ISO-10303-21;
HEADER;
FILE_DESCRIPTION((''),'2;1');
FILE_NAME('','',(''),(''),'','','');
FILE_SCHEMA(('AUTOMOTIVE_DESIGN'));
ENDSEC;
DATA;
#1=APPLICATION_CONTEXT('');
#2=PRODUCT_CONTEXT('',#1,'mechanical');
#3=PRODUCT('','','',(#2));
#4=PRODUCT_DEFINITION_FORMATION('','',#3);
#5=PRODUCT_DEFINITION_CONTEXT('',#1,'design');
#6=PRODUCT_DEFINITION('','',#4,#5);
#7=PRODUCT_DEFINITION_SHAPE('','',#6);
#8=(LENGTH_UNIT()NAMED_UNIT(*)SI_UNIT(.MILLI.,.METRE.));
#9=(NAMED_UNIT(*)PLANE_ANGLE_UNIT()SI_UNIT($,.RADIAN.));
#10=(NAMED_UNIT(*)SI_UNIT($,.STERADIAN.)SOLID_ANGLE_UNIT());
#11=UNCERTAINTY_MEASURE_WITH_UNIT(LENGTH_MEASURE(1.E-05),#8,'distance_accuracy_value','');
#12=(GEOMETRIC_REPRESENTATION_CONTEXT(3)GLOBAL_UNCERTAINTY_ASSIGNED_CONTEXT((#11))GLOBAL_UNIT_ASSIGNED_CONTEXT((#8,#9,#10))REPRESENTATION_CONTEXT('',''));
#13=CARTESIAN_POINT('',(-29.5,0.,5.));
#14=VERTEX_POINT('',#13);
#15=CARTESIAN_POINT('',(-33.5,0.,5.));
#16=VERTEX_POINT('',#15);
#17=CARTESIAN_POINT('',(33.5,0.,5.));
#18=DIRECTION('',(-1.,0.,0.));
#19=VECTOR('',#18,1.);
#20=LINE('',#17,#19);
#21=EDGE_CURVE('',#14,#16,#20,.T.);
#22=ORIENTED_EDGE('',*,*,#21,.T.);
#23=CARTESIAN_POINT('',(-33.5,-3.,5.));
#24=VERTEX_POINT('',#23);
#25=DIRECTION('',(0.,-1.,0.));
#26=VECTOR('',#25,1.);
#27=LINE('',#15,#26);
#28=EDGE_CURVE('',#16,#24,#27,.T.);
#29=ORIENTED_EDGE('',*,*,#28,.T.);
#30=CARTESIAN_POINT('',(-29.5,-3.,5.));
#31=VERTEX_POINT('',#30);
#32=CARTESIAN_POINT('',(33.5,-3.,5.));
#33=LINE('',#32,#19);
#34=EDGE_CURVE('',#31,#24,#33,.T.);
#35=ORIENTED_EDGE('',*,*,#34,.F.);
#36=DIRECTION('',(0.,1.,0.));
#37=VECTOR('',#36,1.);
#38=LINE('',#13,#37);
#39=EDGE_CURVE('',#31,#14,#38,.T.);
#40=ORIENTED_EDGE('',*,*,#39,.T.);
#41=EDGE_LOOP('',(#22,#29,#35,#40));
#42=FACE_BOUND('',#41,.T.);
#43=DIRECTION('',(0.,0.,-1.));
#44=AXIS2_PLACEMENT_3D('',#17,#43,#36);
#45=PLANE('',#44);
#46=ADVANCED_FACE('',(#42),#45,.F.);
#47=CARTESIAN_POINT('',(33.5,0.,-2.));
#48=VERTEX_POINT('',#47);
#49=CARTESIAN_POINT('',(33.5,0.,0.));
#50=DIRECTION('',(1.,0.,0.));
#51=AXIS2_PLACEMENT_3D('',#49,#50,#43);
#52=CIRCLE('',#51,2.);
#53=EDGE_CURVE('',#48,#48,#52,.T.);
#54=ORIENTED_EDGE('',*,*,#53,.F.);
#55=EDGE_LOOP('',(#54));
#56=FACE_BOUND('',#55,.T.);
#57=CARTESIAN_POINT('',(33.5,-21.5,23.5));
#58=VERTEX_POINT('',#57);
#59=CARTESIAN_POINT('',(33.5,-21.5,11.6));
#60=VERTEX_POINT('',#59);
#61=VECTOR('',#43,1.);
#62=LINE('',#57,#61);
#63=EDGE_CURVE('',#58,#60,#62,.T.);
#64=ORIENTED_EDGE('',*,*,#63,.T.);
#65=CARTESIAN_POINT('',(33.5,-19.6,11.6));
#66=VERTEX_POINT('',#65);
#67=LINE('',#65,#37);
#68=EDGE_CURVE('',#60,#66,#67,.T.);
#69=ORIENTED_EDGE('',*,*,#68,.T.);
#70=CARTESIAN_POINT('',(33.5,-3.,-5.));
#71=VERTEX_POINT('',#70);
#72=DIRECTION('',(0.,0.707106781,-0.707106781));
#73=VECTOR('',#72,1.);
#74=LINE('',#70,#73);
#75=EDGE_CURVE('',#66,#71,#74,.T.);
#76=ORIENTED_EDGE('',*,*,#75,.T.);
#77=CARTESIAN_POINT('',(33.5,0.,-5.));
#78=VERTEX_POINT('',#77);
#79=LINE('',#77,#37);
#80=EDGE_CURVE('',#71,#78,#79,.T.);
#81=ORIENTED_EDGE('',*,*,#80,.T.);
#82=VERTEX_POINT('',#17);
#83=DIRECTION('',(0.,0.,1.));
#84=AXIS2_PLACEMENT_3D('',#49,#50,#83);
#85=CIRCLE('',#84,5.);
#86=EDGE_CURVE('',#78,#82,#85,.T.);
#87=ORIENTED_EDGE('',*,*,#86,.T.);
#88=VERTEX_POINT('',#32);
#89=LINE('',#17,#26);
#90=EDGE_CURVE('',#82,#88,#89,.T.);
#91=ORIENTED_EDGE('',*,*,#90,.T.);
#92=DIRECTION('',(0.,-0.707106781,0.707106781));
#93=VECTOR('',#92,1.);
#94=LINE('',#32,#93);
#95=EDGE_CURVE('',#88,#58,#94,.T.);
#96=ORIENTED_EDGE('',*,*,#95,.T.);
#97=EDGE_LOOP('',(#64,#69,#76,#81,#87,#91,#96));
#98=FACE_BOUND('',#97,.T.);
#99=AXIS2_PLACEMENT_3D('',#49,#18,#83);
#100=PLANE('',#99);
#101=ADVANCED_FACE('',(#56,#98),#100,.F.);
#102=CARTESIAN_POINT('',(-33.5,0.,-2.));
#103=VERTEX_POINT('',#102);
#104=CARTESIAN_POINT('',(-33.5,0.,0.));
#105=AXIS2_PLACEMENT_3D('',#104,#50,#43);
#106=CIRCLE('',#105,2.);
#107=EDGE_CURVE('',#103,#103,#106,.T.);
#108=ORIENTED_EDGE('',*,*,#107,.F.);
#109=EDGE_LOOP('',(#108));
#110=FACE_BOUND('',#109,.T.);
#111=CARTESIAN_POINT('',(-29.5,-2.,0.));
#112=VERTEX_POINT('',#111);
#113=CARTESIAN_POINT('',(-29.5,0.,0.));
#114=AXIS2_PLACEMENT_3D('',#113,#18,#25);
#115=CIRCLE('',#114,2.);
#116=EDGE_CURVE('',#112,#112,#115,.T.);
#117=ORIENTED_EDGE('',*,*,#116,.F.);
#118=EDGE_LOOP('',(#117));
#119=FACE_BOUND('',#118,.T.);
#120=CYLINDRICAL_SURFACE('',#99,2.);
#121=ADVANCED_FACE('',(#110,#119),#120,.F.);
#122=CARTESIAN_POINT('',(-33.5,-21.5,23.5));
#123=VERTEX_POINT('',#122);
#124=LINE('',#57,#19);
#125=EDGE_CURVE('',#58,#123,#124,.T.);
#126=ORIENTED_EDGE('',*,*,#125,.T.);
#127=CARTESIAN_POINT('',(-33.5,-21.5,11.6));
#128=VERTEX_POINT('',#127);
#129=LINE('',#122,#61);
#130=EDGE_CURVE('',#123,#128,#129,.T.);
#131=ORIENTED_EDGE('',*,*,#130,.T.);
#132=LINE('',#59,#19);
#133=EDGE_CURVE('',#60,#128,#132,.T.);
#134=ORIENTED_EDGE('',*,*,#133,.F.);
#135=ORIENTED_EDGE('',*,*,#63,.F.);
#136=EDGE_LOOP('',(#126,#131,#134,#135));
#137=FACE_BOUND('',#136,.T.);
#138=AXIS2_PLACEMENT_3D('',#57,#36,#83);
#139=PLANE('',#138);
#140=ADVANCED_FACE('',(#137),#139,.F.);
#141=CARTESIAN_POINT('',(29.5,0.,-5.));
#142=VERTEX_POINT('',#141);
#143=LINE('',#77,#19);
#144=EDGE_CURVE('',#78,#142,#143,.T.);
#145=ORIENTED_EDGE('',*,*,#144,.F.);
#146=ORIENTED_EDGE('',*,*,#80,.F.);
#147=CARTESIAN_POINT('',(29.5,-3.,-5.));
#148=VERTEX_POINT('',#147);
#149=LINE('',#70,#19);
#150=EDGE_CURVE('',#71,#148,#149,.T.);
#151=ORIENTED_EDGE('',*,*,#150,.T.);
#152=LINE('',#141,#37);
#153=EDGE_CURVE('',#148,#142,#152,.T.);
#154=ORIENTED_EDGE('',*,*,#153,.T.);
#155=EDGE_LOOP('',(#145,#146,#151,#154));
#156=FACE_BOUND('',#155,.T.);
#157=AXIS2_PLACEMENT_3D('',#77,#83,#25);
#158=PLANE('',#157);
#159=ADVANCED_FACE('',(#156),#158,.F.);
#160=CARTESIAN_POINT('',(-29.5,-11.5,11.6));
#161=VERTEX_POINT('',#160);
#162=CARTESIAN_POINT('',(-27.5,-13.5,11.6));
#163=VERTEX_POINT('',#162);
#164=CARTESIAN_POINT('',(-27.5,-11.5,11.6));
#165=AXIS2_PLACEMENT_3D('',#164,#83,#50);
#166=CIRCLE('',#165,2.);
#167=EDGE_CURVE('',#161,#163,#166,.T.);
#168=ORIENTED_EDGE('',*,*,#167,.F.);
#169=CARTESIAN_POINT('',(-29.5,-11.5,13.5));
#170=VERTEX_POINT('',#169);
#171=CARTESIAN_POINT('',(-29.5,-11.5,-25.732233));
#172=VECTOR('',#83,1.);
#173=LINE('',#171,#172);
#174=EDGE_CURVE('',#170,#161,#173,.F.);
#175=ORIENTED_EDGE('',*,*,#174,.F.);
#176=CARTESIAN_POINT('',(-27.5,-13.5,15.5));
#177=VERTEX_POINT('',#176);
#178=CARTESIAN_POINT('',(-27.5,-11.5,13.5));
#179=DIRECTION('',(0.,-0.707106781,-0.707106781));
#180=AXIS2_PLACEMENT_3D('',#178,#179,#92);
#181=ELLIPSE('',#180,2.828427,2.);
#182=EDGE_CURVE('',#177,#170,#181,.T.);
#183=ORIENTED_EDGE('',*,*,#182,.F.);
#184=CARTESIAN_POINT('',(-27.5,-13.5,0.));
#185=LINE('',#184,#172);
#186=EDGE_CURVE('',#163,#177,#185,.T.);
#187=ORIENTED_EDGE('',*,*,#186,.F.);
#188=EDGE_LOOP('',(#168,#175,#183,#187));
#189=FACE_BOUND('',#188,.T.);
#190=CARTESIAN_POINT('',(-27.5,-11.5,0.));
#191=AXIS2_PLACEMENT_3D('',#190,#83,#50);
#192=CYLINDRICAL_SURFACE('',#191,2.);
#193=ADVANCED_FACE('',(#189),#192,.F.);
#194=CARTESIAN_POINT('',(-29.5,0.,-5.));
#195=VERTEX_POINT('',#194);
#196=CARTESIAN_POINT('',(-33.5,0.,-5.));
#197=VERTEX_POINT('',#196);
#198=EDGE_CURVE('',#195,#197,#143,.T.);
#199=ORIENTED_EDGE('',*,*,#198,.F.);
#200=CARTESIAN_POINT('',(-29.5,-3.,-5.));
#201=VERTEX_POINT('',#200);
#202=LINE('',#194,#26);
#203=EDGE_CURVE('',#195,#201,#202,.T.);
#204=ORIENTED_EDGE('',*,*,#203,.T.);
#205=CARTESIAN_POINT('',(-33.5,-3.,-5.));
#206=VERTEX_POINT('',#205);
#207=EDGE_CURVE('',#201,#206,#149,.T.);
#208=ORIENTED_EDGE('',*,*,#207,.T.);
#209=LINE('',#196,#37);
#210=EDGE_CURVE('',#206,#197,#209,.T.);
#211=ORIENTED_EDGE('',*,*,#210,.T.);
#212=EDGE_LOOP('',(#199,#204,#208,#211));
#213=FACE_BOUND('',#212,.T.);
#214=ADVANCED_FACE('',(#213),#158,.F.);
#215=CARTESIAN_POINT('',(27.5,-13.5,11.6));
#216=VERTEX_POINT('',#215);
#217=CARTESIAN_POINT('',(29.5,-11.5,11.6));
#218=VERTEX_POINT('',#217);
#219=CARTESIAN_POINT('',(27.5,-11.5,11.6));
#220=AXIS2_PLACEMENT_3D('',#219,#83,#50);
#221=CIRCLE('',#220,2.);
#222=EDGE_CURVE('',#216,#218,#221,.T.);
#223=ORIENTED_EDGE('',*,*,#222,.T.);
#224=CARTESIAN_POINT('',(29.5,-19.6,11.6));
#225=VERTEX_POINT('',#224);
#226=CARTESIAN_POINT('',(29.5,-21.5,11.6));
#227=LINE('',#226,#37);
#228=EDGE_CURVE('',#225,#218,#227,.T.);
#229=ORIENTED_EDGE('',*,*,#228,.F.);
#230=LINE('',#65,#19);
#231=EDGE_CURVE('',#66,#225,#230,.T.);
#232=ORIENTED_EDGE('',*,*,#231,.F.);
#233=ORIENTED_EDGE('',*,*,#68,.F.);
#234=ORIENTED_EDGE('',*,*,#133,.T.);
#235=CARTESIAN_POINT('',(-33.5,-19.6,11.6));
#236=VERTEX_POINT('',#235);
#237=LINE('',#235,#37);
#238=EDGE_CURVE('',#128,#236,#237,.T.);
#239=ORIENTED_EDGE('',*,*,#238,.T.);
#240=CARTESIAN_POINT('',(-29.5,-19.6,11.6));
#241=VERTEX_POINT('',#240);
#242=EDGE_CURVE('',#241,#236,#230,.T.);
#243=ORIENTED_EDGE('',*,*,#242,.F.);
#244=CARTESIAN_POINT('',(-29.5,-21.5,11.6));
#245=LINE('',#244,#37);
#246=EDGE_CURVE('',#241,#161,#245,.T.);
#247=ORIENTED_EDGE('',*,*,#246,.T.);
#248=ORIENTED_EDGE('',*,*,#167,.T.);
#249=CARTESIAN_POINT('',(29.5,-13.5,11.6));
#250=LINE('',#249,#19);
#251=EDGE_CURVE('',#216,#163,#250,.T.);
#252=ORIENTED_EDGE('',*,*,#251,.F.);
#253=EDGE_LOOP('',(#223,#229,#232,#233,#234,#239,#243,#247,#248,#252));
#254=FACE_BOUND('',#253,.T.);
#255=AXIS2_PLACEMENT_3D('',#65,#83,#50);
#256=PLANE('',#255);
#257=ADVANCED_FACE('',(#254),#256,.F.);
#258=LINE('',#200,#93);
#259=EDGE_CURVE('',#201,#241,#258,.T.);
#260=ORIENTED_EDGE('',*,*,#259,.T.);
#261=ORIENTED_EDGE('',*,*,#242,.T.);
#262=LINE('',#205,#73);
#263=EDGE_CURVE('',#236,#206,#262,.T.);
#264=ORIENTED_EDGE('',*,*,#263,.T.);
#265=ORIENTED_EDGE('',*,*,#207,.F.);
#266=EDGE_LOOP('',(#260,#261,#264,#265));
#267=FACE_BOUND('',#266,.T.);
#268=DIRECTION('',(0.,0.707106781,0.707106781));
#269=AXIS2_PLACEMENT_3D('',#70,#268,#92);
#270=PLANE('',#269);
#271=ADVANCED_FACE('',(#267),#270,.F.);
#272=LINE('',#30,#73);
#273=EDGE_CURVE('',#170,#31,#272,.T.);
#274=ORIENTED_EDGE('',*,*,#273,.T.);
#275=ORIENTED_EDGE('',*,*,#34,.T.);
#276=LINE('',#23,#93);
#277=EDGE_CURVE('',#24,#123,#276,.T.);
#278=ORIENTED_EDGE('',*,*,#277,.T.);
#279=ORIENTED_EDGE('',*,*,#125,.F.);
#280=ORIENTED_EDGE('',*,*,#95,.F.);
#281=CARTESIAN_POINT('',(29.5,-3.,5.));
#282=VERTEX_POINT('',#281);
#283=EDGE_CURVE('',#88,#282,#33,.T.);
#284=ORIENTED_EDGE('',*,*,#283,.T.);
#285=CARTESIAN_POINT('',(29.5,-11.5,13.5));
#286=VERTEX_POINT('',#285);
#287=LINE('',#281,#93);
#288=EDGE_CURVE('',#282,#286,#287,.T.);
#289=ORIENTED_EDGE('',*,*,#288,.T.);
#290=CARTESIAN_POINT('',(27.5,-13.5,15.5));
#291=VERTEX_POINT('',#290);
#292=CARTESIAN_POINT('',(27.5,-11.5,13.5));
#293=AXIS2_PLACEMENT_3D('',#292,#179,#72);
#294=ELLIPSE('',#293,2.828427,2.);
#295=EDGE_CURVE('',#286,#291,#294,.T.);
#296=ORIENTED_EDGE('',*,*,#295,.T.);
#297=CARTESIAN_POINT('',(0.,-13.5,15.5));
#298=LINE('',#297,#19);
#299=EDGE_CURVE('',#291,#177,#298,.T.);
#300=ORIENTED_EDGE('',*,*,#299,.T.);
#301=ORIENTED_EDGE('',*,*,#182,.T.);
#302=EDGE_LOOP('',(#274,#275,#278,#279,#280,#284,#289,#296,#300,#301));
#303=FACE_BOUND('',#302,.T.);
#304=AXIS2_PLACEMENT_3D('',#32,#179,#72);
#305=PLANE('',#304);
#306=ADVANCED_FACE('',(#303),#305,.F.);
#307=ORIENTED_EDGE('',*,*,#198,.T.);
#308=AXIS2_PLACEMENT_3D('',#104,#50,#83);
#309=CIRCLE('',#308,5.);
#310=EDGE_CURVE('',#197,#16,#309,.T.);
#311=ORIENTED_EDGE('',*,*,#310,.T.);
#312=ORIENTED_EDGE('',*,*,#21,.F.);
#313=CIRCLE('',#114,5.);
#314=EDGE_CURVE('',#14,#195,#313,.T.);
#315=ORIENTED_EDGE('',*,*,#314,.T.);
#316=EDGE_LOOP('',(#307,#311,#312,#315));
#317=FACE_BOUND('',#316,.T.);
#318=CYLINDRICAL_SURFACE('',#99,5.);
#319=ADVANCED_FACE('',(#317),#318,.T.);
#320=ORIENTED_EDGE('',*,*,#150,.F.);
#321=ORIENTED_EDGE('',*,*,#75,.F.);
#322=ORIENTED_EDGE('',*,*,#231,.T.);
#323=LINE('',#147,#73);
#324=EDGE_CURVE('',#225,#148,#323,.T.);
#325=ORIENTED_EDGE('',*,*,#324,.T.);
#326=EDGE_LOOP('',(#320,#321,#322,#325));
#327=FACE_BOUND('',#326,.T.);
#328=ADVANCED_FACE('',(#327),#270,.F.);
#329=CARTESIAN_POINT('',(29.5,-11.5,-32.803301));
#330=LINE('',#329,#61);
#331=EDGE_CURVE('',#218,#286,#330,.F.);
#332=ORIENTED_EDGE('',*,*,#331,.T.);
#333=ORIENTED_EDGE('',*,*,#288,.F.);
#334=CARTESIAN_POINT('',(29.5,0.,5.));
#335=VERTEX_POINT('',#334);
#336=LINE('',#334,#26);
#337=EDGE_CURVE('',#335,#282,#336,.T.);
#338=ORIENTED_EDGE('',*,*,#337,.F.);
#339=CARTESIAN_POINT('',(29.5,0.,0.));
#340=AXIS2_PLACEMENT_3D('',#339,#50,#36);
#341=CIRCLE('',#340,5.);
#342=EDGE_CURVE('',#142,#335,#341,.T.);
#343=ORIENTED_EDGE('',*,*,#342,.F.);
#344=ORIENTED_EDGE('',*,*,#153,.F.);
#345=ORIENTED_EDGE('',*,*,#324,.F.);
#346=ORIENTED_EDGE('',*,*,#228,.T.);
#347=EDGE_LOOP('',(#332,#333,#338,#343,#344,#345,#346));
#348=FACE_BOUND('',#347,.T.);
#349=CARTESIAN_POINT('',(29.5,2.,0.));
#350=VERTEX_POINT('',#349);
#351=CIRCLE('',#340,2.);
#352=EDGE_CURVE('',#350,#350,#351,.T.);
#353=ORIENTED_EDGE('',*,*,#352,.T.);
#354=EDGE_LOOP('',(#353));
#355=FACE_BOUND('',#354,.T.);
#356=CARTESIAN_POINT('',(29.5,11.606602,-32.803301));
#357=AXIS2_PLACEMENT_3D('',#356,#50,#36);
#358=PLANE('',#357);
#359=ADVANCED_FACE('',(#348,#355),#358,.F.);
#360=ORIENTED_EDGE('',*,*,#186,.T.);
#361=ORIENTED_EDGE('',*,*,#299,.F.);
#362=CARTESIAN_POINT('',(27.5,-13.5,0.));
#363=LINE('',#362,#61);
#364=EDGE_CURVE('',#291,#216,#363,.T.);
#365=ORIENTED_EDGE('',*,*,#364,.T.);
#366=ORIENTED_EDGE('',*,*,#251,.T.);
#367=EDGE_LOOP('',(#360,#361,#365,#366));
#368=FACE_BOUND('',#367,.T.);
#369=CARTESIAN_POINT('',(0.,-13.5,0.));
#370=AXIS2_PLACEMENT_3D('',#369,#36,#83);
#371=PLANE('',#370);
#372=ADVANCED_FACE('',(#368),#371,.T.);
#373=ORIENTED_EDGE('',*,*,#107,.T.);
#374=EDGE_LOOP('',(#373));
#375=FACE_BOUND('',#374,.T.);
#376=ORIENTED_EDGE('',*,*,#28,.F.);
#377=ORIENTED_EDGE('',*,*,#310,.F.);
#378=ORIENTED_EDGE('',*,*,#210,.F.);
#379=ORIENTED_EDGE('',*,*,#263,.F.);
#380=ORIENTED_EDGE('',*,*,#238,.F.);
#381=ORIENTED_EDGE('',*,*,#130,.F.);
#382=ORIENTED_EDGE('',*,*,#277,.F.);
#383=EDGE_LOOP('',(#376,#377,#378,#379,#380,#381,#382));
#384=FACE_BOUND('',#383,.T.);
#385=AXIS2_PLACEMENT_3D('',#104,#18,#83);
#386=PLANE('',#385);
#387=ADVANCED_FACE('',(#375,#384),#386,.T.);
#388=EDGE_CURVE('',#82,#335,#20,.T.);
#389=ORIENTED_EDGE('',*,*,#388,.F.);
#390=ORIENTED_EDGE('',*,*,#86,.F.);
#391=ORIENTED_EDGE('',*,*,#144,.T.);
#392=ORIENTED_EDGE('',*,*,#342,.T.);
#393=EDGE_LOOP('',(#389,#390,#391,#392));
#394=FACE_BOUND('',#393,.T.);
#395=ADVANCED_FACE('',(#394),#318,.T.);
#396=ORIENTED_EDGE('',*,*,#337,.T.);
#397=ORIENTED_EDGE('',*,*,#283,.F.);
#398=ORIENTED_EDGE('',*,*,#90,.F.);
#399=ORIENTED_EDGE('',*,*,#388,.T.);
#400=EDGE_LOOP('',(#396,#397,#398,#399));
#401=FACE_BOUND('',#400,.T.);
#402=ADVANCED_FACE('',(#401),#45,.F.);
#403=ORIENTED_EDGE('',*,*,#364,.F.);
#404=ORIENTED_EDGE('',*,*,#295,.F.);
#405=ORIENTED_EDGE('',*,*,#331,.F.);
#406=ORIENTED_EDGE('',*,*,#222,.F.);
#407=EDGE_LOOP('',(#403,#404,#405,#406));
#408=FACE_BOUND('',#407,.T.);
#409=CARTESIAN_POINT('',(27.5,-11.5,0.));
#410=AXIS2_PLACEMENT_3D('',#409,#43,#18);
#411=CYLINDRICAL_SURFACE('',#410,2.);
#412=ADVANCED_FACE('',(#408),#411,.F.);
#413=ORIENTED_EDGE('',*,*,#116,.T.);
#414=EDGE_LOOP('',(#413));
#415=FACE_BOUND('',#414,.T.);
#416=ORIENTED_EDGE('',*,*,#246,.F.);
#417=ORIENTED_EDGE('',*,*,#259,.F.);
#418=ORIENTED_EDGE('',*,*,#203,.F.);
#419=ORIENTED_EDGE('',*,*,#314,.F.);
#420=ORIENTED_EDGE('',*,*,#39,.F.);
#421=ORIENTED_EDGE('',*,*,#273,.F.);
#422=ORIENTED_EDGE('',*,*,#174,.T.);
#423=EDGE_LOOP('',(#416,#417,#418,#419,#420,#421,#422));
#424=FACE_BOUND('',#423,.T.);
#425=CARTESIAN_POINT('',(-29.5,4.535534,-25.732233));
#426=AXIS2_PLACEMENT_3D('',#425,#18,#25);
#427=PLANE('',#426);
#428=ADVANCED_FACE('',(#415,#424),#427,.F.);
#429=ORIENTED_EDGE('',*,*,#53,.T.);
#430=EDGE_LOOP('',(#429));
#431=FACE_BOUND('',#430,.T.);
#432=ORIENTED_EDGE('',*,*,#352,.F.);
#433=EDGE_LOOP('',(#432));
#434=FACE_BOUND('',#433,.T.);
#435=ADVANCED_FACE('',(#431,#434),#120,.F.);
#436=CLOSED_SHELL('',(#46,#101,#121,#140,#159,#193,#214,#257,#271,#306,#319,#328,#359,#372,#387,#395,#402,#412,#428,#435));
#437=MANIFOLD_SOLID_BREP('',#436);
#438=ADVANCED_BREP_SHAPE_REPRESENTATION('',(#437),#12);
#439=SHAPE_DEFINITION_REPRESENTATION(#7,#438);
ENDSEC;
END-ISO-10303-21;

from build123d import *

# Parameters (mm, degrees)
ESBO_O1_R                  = 2
RESSALTO_EXTRUS_O1_DEPTH   = 33.5
CORTE_EXTRUS_O3_START      = -5
CORTE_EXTRUS_O3_DEPTH      = 23.196699141
CORTE_EXTRUS_O4_DEPTH      = 47.084705336
CORTE_EXTRUS_O4_DEPTH_BACK = 47.084705336
ESBO_O4_W                  = 59
ESBO_O4_H                  = 6.231727984
CORTE_EXTRUS_O5_DEPTH      = 44.128413036
RESSALTO_EXTRUS_O3_START   = -29.398953743
RESSALTO_EXTRUS_O3_DEPTH   = 58.797908802
ESBO_O6_W                  = 59
ESBO_O6_H                  = 4.4
RESSALTO_EXTRUS_O4_DEPTH   = 0.5
CORTE_EXTRUS_O6_DEPTH      = 71.593909086
FILETE1_R                  = 2


# Read off the part's stored shape, not the designer's step: Corte-extrusão3, Ressalto-extrusão3
with BuildPart() as part:
    # Esboço1 → Ressalto-extrusão1 (new, symmetric)
    with BuildSketch(Plane(origin=(0, 0, 0), x_dir=(0, 0, -1), z_dir=(1, 0, 0))):
        with BuildLine():
            Line((-5, 0), (-5, -3))
            Line((-5, -3), (-23.5, -21.5))
            Line((-23.5, -21.5), (-11.6, -21.5))
            Line((-11.6, -21.5), (-11.6, -19.6))
            Line((-11.6, -19.6), (5, -3))
            Line((5, -3), (5, 0))
            ThreePointArc((5, 0), (0, 5), (-5, 0))
        make_face()
        Circle(ESBO_O1_R, mode=Mode.SUBTRACT)
    extrude(amount=RESSALTO_EXTRUS_O1_DEPTH, both=True)

    # Corte-extrusão3 outline → Corte-extrusão3 (cut)
    with BuildSketch(Plane.XY.offset(CORTE_EXTRUS_O3_START)):
        with BuildLine():
            Line((-25.5, -16.196699141), (25.5, -16.196699141))
            add(Edge.make_bspline(
                [(25.5, -16.196699141), (29.5, -16.196699141), (29.5, -13.368272016)],
                knots=[3.141592654, 3.141592654, 3.141592654, 4.71238898, 4.71238898, 4.71238898], degree=2, weights=[1, 0.707106781, 1]))
            Line((29.5, -13.368272016), (29.5, 6))
            Line((29.5, 6), (-29.5, 6))
            Line((-29.5, 6), (-29.5, -13.368272016))
            add(Edge.make_bspline(
                [(-29.5, -13.368272016), (-29.5, -16.196699141), (-25.5, -16.196699141)],
                knots=[4.71238898, 4.71238898, 4.71238898, 6.283185307, 6.283185307, 6.283185307], degree=2, weights=[1, 0.707106781, 1]))
        make_face()
    extrude(amount=CORTE_EXTRUS_O3_DEPTH, mode=Mode.SUBTRACT)

    # Esboço4 → Corte-extrusão4 (cut, two sides: drawn at the far end of the back side and taken through both)
    with BuildSketch(Plane(origin=(0, -16.196699141, 0), x_dir=(1, 0, 0), z_dir=(0, 1, 0)).offset(-CORTE_EXTRUS_O4_DEPTH_BACK)):
        with Locations((0, -8.484136008)):
            Rectangle(ESBO_O4_W, ESBO_O4_H)
    extrude(amount=CORTE_EXTRUS_O4_DEPTH + CORTE_EXTRUS_O4_DEPTH_BACK, mode=Mode.SUBTRACT)

    # Esboço5 → Corte-extrusão5 (cut, through all)
    with BuildSketch(Plane(origin=(0, 0, 11.6), x_dir=(-1, 0, 0), z_dir=(0, 0, -1))):
        with BuildLine():
            Line((29.398953619, -14), (29.5, -14))
            Line((29.5, -14), (29.5, -13.368272016))
            add(Edge.make_bspline(
                [(29.398953619, -14), (29.423863493, -13.923129609), (29.445428126, -13.845331175), (29.463538827, -13.766752142), (29.478105641, -13.68755334), (29.489060697, -13.607909452), (29.49636233, -13.528009486), (29.5, -13.448057281), (29.5, -13.368272016)],
                knots=[0.878269136, 0.878269136, 0.878269136, 0.878269136, 0.878269136, 0.878269136, 0.878269136, 0.878269136, 0.878269136, 1, 1, 1, 1, 1, 1, 1, 1, 1], degree=8))
        make_face()
        with BuildLine():
            Line((-29.5, -14), (-29.39895364, -14))
            add(Edge.make_bspline(
                [(-29.5, -13.368272016), (-29.5, -13.38237401), (-29.499886362, -13.396480452), (-29.499658961, -13.410590284), (-29.499317701, -13.424702445), (-29.498862515, -13.438815874), (-29.498293368, -13.452929509), (-29.497610253, -13.467042285), (-29.493100454, -13.546882135), (-29.48691474, -13.612580226), (-29.478257806, -13.678128457), (-29.467147216, -13.743415855), (-29.45361408, -13.808339118), (-29.437701062, -13.872802316), (-29.419460639, -13.936716614), (-29.39895364, -14)],
                knots=[0, 0, 0, 0, 0, 0, 0, 0, 0, 0.021519038, 0.021519038, 0.021519038, 0.021519038, 0.021519038, 0.021519038, 0.021519038, 0.121755683, 0.121755683, 0.121755683, 0.121755683, 0.121755683, 0.121755683, 0.121755683, 0.121755683, 0.121755683], degree=8))
            Line((-29.5, -13.368272016), (-29.5, -14))
        make_face()
    extrude(amount=-CORTE_EXTRUS_O5_DEPTH, mode=Mode.SUBTRACT)

    # Ressalto-extrusão3 outline → Ressalto-extrusão3 (add)
    with BuildSketch(Plane.YZ.offset(RESSALTO_EXTRUS_O3_START)):
        Polygon((-14, 16), (-16.196699141, 18.196699141), (-16.196699141, 11.6), (-14, 11.6), align=None)
    extrude(amount=RESSALTO_EXTRUS_O3_DEPTH)

    # Esboço6 → Ressalto-extrusão4 (add)
    with BuildSketch(Plane(origin=(0, -14, 0), x_dir=(1, 0, 0), z_dir=(0, 1, 0))):
        with Locations((0, -13.8)):
            Rectangle(ESBO_O6_W, ESBO_O6_H)
    extrude(amount=RESSALTO_EXTRUS_O4_DEPTH)

    # Esboço7 → Corte-extrusão6 (cut, through all)
    with BuildSketch(Plane.ZY.offset(29.5)):
        Polygon((16, -13.5), (15.5, -13.5), (16, -14), align=None)
    extrude(amount=-CORTE_EXTRUS_O6_DEPTH, mode=Mode.SUBTRACT)

    # Filete1
    filete1_edges = [part.edges().sort_by_distance(p)[0] for p in [
        (29.5, -13.5, 13.55),
        (-29.5, -13.5, 13.55),
    ]]
    fillet(filete1_edges, radius=FILETE1_R)


solid = part.part
